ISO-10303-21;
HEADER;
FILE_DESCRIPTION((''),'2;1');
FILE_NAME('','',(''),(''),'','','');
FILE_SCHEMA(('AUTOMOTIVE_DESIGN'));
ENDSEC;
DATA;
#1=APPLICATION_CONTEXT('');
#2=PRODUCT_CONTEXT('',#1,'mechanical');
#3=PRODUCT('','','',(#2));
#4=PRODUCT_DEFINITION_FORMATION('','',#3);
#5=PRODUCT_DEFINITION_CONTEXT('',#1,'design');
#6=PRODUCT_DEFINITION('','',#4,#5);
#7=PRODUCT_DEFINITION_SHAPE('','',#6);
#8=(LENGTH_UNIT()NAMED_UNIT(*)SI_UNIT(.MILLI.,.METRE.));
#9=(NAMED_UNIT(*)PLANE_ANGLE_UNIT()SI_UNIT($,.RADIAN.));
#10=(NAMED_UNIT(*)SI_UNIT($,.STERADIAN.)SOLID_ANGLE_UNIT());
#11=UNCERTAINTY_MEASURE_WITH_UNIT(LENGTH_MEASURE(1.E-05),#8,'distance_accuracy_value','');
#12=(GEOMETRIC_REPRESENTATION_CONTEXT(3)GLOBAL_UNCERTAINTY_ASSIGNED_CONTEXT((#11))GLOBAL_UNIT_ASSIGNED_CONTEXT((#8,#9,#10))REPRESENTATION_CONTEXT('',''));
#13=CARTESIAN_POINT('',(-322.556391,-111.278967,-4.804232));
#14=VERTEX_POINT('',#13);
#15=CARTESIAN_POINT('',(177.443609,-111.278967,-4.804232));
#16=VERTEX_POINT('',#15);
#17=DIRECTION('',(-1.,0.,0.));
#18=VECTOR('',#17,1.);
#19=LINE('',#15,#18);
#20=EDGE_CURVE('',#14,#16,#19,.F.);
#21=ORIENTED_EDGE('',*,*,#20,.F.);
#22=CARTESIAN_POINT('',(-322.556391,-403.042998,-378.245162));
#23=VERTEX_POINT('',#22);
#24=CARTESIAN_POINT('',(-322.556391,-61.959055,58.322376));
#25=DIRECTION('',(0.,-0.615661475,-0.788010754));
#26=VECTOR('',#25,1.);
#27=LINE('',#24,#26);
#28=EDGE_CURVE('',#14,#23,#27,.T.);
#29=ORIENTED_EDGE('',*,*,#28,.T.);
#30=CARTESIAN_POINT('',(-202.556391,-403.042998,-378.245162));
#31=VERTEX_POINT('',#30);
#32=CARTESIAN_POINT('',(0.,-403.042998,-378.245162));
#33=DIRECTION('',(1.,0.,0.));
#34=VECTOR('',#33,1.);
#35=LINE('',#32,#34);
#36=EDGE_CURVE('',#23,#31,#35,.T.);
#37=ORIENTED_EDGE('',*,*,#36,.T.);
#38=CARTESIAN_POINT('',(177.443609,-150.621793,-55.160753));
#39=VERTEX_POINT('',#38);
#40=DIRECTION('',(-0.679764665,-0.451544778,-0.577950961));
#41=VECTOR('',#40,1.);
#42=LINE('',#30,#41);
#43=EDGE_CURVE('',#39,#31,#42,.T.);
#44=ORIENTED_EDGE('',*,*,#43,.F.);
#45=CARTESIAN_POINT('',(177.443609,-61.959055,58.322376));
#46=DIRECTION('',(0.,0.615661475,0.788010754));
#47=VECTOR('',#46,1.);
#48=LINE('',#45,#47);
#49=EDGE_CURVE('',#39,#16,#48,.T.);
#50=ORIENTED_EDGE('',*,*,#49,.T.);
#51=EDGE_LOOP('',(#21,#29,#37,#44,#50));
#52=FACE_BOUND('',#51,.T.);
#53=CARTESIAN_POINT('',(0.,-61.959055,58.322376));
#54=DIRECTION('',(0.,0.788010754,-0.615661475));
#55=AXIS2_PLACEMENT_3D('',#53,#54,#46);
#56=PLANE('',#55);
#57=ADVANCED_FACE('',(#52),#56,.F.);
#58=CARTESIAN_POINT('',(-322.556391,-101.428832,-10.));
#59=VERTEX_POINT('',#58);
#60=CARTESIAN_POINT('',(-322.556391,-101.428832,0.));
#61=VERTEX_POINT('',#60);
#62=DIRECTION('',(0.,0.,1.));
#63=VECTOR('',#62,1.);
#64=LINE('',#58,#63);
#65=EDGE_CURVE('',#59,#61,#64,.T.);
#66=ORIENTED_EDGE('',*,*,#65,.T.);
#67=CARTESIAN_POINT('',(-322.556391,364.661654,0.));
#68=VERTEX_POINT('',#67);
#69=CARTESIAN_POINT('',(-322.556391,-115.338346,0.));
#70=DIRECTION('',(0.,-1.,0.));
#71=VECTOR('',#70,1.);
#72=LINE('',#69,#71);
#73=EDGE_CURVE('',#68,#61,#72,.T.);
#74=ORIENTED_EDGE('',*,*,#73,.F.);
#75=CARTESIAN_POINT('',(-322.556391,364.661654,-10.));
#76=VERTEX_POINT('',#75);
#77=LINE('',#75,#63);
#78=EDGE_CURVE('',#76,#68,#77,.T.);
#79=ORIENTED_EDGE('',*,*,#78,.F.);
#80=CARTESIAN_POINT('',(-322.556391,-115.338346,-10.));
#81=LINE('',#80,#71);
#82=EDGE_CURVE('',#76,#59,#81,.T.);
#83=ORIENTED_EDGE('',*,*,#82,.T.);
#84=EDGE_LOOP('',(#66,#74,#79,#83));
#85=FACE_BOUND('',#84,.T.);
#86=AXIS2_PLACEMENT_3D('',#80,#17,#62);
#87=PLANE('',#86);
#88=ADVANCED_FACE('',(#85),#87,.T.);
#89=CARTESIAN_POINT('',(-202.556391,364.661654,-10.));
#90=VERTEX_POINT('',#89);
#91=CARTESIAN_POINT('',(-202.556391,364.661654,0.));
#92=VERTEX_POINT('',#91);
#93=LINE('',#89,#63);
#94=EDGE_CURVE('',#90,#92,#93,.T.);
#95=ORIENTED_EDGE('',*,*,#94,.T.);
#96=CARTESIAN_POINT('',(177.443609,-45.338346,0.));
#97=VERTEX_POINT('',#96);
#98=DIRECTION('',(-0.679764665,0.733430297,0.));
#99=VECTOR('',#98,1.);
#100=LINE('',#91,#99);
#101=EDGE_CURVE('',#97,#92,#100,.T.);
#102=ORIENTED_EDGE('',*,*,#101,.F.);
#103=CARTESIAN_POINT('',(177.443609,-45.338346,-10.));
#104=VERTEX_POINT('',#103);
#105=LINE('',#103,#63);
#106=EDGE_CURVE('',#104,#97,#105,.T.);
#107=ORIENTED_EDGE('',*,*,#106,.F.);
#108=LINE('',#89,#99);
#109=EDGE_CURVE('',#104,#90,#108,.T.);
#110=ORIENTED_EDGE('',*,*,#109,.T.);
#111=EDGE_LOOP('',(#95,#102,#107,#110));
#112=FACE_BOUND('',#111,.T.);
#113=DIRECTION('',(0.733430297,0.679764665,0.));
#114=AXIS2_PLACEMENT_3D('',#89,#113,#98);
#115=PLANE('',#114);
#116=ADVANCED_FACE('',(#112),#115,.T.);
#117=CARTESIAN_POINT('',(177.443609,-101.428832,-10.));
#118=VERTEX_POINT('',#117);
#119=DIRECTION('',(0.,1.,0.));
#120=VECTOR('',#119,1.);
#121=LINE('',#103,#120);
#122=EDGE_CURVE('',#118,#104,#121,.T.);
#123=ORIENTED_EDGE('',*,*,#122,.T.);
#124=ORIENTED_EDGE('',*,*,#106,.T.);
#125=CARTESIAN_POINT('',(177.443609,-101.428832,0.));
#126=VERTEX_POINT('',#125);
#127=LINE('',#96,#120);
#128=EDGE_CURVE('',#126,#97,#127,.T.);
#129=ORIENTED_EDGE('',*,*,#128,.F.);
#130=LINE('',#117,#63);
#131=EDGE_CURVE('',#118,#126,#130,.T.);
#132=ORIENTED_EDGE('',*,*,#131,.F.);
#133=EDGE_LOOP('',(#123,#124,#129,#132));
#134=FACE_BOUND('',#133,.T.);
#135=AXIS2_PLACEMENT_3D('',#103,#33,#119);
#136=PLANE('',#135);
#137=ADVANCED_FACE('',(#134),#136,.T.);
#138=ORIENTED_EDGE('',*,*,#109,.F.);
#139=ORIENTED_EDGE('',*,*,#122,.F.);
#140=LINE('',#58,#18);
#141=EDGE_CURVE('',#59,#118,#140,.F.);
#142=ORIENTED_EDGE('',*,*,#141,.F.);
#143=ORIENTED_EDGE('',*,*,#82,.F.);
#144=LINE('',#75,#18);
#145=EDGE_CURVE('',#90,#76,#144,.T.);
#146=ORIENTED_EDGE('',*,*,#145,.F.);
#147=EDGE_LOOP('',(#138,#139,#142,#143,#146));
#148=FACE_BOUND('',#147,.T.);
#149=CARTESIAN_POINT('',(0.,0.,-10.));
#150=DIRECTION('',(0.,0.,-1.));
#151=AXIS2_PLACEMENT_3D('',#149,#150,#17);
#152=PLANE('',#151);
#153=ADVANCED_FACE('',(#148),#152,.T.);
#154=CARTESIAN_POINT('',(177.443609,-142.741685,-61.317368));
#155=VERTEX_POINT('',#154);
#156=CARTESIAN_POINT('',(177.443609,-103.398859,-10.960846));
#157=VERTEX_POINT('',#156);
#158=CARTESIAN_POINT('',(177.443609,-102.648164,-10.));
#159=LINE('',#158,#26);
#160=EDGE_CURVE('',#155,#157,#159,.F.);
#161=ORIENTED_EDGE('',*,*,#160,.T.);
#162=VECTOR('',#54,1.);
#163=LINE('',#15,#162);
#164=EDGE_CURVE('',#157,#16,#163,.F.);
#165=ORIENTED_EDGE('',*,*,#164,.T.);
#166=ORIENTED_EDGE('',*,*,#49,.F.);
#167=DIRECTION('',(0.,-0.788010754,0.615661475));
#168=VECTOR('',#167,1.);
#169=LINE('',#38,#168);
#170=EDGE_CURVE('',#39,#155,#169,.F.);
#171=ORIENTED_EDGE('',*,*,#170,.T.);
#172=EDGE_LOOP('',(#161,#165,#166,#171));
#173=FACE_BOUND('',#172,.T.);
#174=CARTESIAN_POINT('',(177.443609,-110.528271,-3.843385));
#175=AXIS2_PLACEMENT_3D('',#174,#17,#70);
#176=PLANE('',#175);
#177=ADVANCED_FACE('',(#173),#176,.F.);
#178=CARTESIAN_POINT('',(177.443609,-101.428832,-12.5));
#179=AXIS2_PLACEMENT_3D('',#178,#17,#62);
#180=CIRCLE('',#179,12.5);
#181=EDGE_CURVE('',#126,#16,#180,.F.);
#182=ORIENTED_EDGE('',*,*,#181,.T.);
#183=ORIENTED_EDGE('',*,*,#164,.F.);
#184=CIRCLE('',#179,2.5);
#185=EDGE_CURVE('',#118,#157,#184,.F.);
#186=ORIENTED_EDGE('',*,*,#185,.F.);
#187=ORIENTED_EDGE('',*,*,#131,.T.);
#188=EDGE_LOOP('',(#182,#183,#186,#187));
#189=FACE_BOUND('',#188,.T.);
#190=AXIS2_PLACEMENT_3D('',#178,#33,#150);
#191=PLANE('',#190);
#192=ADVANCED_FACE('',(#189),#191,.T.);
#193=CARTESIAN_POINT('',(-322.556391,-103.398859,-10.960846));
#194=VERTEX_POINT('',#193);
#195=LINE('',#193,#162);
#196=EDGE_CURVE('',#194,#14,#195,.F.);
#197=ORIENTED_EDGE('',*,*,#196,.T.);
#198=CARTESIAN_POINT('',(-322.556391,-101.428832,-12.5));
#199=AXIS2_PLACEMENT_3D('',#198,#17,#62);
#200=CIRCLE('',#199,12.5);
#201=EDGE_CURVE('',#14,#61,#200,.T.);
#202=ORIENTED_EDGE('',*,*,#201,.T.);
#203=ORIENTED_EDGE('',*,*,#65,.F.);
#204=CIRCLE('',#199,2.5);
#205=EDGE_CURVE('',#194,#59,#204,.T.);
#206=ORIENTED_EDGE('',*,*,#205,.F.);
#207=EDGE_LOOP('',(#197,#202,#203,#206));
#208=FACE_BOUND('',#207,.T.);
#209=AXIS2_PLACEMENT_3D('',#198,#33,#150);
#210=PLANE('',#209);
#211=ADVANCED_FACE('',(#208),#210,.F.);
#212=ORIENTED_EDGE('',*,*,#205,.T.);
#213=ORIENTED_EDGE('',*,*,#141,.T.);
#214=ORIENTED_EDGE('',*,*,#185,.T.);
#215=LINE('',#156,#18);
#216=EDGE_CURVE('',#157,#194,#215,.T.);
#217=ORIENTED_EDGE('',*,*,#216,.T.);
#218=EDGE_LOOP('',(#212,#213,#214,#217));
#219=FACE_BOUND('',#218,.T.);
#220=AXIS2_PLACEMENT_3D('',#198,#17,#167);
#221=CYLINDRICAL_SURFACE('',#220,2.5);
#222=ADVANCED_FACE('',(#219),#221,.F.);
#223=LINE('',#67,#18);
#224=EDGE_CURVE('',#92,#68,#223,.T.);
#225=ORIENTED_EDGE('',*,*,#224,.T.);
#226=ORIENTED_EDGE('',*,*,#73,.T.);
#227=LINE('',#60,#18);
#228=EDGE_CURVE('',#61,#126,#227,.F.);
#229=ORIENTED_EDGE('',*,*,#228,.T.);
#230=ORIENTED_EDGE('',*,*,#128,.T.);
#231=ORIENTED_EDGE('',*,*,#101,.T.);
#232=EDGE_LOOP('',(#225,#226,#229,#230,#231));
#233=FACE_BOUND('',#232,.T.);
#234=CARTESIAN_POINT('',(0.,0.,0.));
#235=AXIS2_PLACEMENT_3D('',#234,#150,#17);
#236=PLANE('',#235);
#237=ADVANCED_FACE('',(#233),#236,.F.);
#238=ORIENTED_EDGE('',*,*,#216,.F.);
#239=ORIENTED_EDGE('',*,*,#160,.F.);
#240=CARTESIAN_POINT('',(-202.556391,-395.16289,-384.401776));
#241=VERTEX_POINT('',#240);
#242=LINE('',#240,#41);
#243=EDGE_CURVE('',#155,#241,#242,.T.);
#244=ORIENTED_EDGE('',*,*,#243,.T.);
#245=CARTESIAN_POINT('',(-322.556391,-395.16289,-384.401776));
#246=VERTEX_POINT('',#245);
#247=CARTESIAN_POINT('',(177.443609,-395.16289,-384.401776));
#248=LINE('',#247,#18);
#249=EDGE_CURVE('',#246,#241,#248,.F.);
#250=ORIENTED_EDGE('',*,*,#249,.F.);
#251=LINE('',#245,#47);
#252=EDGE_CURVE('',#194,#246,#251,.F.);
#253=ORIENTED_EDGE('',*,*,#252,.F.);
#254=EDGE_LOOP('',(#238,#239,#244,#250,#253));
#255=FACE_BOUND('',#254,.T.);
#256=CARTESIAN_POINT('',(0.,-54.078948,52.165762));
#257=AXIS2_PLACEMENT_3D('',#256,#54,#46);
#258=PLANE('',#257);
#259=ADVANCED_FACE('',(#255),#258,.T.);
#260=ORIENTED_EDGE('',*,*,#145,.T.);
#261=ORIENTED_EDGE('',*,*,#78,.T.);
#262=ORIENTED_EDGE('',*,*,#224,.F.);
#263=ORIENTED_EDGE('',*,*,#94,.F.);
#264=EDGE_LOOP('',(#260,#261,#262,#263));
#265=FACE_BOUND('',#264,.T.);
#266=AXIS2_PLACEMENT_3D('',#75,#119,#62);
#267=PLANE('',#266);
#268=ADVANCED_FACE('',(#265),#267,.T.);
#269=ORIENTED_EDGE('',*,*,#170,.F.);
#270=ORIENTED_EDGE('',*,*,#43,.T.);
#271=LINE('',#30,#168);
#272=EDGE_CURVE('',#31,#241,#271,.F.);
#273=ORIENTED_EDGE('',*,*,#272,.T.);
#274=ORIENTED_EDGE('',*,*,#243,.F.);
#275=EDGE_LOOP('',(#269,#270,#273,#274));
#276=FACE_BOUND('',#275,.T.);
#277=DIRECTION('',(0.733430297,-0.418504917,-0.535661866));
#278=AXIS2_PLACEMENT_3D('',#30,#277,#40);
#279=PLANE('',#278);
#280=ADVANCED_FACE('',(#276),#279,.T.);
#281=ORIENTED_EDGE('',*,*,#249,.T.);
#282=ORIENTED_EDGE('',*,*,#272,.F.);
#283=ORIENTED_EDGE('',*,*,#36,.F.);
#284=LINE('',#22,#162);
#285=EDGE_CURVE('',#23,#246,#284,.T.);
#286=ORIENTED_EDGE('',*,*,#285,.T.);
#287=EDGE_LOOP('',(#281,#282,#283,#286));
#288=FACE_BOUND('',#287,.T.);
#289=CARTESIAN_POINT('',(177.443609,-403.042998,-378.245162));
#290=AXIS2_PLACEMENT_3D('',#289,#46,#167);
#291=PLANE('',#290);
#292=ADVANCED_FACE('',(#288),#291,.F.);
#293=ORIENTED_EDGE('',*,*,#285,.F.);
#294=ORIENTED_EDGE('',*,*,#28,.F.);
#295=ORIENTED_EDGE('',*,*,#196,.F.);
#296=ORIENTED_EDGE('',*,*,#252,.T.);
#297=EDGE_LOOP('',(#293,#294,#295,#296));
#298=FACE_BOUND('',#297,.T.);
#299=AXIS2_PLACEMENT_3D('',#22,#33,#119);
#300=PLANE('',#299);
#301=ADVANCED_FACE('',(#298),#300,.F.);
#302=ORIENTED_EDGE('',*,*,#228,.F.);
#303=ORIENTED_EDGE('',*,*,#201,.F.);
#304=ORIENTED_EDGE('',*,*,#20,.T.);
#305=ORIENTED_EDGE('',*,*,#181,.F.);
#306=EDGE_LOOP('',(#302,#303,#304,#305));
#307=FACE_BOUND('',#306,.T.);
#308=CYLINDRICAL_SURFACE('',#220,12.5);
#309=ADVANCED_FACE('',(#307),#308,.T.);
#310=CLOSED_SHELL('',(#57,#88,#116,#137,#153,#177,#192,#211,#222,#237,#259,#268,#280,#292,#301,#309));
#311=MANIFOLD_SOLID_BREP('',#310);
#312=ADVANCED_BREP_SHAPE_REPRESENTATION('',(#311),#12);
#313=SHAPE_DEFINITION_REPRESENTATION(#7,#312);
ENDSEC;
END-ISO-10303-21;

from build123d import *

# Parameters (mm, degrees)
BASE_FLANGE1_DEPTH   = 10
EDGE_FLANGE1_START   = -322.556390977
EDGE_FLANGE1_DEPTH   = 500
EDGE_FLANGE1_2_DEPTH = 500
CUT_EXTRUDE1_DEPTH   = 10


# Read off the part's stored shape, not the designer's step: Edge-Flange1
# Sheet-metal steps are written as plain solids
with BuildPart() as part:
    # Sketch1 → Base-Flange1 (new body)
    with BuildSketch(Plane.XY):
        Polygon((-322.556390977, 364.661654135), (-202.556390977, 364.661654135), (177.443609023, -45.338345865), (177.443609023, -115.338345865), (-322.556390977, -115.338345865), align=None)
    extrude(amount=-BASE_FLANGE1_DEPTH)

    # Edge-Flange1 outline → Edge-Flange1 (cut)
    with BuildSketch(Plane.YZ.offset(EDGE_FLANGE1_START)):
        with BuildLine():
            Line((-115.338345865, -10), (-111.278966663, -4.804231558))
            ThreePointArc((-111.278966663, -4.804231558), (-106.908471578, -1.265074421), (-101.428832243, 0))
            Line((-101.428832243, 0), (-115.338345865, 0))
            Line((-115.338345865, 0), (-115.338345865, -10))
        make_face()
    extrude(amount=EDGE_FLANGE1_DEPTH, mode=Mode.SUBTRACT)

    # Edge-Flange1 2 outline → Edge-Flange1 2 (add)
    with BuildSketch(Plane.YZ.offset(EDGE_FLANGE1_START)):
        with BuildLine():
            Line((-101.428832243, -10), (-115.338345865, -10))
            Line((-115.338345865, -10), (-403.042997756, -378.245161731))
            Line((-403.042997756, -378.245161731), (-395.16289022, -384.401776484))
            Line((-395.16289022, -384.401776484), (-103.398859127, -10.960846312))
            ThreePointArc((-103.398859127, -10.960846312), (-102.52476011, -10.253014884), (-101.428832243, -10))
        make_face()
    extrude(amount=EDGE_FLANGE1_2_DEPTH)

    # Sketch9 → Cut-Extrude1 (cut)
    with BuildSketch(Plane(origin=(0, -66.769129934, 52.165761512), x_dir=(1, 0, 0), z_dir=(0, -0.788010753606719, 0.6156614753256621))):
        Polygon((-202.556390977, -546.199301562), (177.443609023, -136.199301562), (177.443609023, -546.199301562), align=None)
    extrude(amount=-CUT_EXTRUDE1_DEPTH, mode=Mode.SUBTRACT)


solid = part.part
